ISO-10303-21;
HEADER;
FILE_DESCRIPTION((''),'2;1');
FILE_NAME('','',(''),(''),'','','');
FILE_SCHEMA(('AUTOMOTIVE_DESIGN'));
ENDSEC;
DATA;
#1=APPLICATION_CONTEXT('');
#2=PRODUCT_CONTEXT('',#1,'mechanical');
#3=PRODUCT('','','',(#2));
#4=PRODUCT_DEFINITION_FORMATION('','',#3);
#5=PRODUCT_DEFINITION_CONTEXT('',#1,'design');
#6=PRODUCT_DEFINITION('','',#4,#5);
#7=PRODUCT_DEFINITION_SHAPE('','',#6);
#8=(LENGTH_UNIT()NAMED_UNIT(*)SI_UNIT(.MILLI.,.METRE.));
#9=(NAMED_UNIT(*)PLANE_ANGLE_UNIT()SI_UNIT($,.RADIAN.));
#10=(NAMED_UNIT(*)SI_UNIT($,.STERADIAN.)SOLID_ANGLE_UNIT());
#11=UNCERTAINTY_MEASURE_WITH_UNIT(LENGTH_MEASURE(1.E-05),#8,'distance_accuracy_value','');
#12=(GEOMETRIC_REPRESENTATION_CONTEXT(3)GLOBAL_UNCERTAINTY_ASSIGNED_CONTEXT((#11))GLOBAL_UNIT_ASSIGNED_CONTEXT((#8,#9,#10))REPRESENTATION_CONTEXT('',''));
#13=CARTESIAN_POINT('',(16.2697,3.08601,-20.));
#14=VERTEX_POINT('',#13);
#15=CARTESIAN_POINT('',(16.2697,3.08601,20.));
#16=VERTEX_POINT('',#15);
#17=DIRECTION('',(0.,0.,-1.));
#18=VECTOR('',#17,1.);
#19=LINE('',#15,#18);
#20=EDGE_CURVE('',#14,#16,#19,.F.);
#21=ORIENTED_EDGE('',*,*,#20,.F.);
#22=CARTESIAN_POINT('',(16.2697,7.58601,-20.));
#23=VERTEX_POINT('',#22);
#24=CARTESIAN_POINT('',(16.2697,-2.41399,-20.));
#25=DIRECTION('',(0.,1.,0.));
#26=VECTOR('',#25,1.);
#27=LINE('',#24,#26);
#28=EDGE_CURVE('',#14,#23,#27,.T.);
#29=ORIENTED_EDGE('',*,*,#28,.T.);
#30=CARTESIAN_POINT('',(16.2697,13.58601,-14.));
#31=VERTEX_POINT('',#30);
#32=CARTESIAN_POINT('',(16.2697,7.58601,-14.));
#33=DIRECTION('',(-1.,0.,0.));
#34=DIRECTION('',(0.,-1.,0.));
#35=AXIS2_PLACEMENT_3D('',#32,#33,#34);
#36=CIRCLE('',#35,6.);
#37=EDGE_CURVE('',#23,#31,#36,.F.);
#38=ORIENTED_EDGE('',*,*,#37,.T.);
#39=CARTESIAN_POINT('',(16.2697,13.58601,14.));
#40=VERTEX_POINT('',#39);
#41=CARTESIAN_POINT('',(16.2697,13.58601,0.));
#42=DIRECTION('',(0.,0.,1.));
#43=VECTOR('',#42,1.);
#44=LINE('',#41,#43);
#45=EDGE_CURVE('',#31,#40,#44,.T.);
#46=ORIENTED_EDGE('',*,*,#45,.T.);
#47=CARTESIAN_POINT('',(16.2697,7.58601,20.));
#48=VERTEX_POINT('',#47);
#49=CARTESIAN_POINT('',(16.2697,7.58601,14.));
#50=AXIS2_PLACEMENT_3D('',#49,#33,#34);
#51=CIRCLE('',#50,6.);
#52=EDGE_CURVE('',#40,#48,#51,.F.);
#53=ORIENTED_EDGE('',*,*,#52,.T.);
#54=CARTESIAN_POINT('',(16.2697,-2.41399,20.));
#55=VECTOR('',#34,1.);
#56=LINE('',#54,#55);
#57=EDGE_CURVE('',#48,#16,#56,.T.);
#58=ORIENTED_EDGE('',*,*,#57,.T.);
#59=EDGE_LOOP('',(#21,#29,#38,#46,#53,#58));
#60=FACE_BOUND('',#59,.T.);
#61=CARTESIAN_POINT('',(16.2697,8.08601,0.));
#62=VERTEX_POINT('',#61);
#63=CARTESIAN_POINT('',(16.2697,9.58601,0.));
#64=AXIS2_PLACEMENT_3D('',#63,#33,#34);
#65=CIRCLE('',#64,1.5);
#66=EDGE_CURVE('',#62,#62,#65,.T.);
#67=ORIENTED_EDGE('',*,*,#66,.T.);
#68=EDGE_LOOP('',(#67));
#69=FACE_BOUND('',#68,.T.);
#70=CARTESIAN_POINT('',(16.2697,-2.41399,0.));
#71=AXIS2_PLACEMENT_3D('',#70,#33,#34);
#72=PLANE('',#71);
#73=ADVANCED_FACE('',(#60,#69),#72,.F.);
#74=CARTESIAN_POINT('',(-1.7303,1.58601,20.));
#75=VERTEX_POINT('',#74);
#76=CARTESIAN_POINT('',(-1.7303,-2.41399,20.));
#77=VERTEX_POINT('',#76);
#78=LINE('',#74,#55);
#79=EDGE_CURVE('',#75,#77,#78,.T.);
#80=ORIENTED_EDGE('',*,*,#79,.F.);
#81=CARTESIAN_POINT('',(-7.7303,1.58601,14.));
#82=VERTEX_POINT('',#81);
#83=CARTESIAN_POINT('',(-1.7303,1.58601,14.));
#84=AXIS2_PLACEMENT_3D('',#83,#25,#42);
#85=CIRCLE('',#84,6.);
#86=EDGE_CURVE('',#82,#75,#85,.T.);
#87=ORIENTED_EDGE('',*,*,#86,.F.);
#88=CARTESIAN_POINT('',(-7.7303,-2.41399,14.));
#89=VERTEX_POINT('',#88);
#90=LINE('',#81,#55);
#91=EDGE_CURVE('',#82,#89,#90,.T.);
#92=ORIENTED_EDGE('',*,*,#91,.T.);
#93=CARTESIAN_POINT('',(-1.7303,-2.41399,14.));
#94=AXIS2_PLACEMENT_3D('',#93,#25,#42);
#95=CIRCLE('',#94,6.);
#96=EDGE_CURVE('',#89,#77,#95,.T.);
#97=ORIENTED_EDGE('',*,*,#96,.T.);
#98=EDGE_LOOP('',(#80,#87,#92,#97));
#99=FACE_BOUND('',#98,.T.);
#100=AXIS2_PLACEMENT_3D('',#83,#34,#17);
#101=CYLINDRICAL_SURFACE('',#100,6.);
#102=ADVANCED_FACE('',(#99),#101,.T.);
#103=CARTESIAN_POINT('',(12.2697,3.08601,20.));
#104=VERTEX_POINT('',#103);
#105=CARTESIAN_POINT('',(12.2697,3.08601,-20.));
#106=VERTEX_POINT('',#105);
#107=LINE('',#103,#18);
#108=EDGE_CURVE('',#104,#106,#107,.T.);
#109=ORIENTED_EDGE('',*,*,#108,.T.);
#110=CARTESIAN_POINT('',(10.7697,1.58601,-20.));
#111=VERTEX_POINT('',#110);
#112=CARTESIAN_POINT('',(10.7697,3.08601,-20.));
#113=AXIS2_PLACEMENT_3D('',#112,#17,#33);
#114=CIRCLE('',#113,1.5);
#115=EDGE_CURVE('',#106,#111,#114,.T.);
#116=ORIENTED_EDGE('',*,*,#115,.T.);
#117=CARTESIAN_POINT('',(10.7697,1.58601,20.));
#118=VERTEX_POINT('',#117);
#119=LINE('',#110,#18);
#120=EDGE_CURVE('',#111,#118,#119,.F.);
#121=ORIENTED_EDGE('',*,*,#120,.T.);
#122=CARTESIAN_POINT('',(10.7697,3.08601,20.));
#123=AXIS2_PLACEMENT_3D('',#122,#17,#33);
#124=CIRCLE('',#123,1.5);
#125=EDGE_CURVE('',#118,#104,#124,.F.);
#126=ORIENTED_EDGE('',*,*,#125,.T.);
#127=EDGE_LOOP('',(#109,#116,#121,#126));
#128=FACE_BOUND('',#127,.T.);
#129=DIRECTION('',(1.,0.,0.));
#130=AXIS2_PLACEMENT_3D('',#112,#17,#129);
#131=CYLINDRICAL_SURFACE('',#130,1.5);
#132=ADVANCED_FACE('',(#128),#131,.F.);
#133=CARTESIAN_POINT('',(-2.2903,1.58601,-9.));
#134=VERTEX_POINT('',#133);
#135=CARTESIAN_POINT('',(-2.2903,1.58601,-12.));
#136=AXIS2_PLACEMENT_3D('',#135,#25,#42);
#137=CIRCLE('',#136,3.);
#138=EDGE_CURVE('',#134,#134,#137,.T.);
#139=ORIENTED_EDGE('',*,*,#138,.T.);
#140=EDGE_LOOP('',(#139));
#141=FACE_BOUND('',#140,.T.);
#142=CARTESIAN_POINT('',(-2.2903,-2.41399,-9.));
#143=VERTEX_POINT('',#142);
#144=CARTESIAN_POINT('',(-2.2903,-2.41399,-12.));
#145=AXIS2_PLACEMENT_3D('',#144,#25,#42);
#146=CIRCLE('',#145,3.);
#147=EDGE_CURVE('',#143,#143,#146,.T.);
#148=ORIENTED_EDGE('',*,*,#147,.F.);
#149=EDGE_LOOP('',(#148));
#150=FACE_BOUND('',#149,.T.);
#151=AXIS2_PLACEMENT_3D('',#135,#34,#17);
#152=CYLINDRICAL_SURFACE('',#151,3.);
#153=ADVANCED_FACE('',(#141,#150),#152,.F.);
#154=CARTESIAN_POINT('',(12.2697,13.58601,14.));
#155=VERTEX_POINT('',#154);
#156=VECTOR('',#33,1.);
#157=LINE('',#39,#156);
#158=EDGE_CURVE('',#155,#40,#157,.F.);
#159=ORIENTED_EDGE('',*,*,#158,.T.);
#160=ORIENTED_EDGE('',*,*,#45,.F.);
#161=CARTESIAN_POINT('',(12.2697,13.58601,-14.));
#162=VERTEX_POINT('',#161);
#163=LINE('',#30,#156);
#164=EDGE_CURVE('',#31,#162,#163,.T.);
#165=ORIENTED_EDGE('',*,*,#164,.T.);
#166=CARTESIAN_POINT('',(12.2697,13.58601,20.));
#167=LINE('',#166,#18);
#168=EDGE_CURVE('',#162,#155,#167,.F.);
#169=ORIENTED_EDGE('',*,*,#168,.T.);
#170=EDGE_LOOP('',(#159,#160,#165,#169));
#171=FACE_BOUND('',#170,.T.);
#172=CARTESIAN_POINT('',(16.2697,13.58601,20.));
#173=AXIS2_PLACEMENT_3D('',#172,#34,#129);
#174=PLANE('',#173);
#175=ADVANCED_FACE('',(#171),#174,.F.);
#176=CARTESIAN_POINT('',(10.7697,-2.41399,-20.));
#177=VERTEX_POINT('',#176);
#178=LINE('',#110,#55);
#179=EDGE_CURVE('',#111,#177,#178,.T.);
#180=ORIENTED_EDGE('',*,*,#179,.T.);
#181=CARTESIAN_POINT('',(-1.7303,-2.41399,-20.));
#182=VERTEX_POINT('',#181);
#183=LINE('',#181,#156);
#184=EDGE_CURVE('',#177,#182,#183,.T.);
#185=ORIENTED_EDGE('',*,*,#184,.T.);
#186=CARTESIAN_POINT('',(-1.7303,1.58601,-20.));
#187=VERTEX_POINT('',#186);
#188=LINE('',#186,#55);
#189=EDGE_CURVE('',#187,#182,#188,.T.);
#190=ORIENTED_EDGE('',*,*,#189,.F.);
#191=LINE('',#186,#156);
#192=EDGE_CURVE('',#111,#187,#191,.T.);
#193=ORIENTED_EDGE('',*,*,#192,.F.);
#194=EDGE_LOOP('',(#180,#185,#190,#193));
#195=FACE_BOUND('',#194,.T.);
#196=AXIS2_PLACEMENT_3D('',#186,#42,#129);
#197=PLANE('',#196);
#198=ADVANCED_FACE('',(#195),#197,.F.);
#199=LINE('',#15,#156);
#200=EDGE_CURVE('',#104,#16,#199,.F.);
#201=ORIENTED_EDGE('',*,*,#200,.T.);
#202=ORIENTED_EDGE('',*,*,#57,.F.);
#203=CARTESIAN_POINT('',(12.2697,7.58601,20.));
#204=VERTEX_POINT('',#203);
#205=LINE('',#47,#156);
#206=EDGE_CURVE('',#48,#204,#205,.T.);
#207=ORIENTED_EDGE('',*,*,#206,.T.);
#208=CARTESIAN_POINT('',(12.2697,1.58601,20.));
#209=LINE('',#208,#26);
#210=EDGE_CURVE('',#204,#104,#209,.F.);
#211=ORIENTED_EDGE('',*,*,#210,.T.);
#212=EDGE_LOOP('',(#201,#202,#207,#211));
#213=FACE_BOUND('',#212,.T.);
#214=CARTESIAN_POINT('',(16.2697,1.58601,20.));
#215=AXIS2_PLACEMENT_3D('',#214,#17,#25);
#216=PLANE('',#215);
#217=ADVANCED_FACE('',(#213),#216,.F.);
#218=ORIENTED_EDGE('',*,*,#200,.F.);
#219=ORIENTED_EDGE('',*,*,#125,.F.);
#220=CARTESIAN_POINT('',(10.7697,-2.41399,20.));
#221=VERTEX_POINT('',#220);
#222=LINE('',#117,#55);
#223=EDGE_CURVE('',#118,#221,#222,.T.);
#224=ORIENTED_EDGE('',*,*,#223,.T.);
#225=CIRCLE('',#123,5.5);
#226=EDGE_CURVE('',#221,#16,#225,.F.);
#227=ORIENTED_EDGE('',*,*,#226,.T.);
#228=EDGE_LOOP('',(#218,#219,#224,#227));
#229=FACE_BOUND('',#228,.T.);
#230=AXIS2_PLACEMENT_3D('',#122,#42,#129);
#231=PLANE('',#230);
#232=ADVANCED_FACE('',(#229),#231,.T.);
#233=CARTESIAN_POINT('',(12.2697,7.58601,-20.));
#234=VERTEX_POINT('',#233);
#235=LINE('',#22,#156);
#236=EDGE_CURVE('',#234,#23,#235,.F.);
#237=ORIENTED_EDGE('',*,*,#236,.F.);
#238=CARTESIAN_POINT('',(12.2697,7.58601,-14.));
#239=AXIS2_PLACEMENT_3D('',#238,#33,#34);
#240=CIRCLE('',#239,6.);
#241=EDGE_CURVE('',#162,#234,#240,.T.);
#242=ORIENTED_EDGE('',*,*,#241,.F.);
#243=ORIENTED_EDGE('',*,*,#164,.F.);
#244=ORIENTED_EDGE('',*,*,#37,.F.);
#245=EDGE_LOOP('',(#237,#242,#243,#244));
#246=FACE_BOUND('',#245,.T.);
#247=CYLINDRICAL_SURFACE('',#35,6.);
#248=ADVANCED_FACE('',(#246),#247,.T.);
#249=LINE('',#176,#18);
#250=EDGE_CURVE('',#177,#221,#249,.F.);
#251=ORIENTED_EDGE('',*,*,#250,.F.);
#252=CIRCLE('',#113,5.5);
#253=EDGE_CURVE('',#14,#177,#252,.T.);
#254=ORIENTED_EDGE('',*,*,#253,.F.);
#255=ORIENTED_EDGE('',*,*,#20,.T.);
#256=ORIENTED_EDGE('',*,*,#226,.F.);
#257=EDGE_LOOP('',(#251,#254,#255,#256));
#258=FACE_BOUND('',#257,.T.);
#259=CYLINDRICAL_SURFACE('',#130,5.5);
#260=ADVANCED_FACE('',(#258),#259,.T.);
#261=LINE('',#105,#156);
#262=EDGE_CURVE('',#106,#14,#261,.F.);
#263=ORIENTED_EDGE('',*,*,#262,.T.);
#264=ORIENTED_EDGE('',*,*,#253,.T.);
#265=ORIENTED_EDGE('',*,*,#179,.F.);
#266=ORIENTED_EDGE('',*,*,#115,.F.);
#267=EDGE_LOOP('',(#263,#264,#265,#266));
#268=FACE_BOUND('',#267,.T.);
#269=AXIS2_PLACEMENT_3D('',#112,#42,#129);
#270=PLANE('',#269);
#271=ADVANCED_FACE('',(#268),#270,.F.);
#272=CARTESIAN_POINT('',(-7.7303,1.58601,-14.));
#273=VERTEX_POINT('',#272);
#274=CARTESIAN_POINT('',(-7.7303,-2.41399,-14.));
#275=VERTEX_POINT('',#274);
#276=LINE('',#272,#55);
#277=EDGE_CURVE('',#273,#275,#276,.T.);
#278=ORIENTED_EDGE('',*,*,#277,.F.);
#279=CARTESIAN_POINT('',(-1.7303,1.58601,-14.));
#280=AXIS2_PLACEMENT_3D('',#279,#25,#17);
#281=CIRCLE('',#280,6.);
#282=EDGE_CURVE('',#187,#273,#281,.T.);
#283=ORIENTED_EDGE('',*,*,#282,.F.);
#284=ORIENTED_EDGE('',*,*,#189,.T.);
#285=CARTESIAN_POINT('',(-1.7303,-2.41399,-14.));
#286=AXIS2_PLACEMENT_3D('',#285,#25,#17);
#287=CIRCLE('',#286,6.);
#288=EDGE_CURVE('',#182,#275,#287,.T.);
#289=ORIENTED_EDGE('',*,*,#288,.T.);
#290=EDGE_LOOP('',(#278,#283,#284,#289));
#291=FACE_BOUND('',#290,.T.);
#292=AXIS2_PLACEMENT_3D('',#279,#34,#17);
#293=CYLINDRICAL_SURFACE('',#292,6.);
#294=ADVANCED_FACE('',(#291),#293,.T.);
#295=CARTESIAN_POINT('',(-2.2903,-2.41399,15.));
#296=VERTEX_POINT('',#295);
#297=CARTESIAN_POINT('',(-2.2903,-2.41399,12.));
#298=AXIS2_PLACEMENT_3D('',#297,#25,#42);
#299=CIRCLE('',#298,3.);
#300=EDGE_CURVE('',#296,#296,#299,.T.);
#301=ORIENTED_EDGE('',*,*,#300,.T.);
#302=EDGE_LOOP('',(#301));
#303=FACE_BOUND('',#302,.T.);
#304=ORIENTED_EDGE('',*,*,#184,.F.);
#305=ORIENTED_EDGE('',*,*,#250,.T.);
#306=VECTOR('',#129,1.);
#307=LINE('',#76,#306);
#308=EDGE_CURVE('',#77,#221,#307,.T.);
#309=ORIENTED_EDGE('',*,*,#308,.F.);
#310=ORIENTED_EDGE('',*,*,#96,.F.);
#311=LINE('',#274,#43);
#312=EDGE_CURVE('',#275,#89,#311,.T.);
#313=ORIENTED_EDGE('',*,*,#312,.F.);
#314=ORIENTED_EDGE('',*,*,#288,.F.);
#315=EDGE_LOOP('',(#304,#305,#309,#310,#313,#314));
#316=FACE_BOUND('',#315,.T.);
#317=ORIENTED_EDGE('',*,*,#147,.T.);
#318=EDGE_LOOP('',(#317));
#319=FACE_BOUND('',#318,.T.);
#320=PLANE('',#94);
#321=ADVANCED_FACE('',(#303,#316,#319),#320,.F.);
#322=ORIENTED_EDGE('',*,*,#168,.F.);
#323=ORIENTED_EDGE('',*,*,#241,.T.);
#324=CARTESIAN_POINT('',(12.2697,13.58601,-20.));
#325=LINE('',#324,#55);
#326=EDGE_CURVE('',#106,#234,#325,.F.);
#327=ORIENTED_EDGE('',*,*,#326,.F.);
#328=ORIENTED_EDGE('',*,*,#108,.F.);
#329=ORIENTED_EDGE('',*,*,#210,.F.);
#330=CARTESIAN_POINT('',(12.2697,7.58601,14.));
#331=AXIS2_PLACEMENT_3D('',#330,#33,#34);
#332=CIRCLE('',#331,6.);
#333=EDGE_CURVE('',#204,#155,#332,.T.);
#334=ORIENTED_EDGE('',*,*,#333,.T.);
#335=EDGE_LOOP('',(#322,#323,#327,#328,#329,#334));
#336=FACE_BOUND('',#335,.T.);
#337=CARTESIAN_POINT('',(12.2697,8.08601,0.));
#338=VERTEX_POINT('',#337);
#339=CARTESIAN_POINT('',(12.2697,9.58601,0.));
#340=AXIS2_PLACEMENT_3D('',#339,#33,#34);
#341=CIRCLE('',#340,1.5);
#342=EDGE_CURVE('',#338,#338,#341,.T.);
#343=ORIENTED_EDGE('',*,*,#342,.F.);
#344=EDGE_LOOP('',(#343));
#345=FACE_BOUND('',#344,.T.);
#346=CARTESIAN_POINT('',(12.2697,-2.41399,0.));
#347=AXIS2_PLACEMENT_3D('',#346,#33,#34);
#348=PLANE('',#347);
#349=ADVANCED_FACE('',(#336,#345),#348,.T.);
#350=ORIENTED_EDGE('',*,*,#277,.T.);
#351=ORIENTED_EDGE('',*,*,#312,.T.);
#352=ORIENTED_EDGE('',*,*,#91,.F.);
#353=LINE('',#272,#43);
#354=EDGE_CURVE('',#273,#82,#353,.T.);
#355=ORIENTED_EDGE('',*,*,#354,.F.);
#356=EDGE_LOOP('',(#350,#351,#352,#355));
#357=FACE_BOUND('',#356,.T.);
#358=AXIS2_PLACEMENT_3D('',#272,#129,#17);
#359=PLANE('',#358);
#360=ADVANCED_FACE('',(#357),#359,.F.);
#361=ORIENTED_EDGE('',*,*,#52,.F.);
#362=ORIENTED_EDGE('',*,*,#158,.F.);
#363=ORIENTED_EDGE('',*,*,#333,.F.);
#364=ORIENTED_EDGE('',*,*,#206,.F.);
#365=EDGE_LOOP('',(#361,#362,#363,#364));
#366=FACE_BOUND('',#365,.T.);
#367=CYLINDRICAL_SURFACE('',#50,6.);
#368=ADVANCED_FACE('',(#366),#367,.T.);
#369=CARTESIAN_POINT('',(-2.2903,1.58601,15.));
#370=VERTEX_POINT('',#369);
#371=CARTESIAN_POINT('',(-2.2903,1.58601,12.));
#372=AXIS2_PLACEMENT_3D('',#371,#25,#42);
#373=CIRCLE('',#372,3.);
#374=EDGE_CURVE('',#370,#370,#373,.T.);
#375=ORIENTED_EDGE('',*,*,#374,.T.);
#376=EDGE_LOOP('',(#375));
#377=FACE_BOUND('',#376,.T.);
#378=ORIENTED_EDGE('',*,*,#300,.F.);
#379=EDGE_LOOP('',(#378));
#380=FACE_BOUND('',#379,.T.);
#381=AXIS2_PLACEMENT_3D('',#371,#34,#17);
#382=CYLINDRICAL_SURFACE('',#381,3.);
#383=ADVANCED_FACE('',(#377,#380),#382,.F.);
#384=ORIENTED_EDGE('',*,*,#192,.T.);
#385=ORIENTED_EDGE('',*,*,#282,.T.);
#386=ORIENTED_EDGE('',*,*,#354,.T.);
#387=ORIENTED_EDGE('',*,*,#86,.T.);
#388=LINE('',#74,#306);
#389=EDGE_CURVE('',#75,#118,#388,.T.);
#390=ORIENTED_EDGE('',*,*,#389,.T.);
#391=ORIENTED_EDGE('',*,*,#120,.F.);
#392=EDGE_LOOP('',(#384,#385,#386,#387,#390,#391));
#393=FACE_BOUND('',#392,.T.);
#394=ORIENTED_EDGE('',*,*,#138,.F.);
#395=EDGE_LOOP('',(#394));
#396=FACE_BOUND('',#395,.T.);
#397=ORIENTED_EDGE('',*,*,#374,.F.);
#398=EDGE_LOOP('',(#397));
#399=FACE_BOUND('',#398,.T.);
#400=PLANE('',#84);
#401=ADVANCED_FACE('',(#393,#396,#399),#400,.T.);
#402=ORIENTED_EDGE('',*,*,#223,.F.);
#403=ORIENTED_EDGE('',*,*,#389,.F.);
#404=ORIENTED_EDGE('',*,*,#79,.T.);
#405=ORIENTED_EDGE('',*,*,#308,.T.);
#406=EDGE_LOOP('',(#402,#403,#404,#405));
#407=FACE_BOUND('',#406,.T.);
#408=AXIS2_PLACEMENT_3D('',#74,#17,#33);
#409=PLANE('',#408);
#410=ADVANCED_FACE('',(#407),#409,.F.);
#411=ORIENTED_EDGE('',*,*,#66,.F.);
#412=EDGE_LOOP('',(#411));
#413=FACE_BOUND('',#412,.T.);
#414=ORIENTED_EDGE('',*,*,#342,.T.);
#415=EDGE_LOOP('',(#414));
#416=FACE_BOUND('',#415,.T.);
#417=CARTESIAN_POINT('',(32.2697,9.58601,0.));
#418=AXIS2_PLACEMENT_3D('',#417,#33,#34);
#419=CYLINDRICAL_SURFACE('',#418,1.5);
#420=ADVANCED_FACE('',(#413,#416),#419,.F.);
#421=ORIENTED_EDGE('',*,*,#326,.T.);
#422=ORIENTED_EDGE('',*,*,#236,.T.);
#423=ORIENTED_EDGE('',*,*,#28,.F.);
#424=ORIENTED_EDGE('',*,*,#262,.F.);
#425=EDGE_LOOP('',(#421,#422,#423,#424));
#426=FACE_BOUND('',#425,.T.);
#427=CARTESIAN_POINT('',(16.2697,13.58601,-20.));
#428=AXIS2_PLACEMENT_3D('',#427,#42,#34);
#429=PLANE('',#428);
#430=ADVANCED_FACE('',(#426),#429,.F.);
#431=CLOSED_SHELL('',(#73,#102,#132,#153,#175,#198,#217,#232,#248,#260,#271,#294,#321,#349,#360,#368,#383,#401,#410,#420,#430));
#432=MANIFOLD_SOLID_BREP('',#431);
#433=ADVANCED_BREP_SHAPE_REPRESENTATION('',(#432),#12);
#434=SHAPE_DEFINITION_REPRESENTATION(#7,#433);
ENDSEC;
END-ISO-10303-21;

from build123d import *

# Parameters (mm, degrees)
SKETCH1_R                    = 1.5
BASE_FLANGE1_DEPTH           = 2
EDGE_FLANGE1_STRIP_W         = 9.5
EDGE_FLANGE1_STRIP_H         = 2
EDGE_FLANGE1_STRIP_CUT_DEPTH = 20
EDGE_FLANGE1_DEPTH           = 20
SKETCH9_R                    = 0.75
CUT_EXTRUDE1_DEPTH           = 10
FILLET1_R                    = 3
L_EK1_SCALE                  = 2


# Sheet-metal steps are written as plain solids
with BuildPart() as part:
    # Sketch1 → Base-Flange1 (new body)
    with BuildSketch(Plane(origin=(0, 0, 0), x_dir=(1, 0, 0), z_dir=(0, 1, 0))):
        with BuildLine():
            Line((0, 7), (0, -7))
            ThreePointArc((0, -7), (0.878679656, -9.121320344), (3, -10))
            Line((3, -10), (12, -10))
            Line((12, -10), (12, 10))
            Line((12, 10), (3, 10))
            ThreePointArc((3, 10), (0.878679656, 9.121320344), (0, 7))
        make_face()
        with Locations(Location((2.72, 6, 0), (0, 0, 270))):
            Circle(SKETCH1_R, mode=Mode.SUBTRACT)
        with Locations(Location((2.72, -6, 0), (0, 0, 270))):
            Circle(SKETCH1_R, mode=Mode.SUBTRACT)
    extrude(amount=BASE_FLANGE1_DEPTH)

    # Edge-Flange1 strip (across the edge) → Edge-Flange1 strip cut (cut)
    with BuildSketch(Plane(origin=(12, 2, 10), x_dir=(-1, 0, 0), z_dir=(0, 0, -1))):
        with Locations((-2, -1)):
            Rectangle(EDGE_FLANGE1_STRIP_W, EDGE_FLANGE1_STRIP_H)
    extrude(amount=EDGE_FLANGE1_STRIP_CUT_DEPTH, mode=Mode.SUBTRACT)

    # Edge-Flange1 section (across the edge) → Edge-Flange1 (add)
    with BuildSketch(Plane(origin=(12, 2, 10), x_dir=(-1, 0, 0), z_dir=(0, 0, -1))):
        with BuildLine():
            Line((0, 0.75), (0, 6))
            Line((0, 6), (2, 6))
            Line((2, 6), (2, 0.75))
            ThreePointArc((2, 0.75), (2.219669914, 0.219669914), (2.75, 0))
            Line((2.75, 0), (2.75, -2))
            ThreePointArc((2.75, -2), (0.805456352, -1.194543648), (0, 0.75))
        make_face()
    extrude(amount=EDGE_FLANGE1_DEPTH)

    # Sketch9 → Cut-Extrude1 (cut)
    with BuildSketch(Plane.ZY.offset(-10)):
        with Locations(Location((0, 6, 0), (0, 0, 270))):
            Circle(SKETCH9_R)
    extrude(amount=-CUT_EXTRUDE1_DEPTH, mode=Mode.SUBTRACT)

    # Fillet1
    fillet1_edges = [part.edges().sort_by_distance(p)[0] for p in [
        (11, 8, 10),
        (11, 8, -10),
    ]]
    fillet(fillet1_edges, radius=FILLET1_R)


with BuildPart() as part_1:
    # Ölçek1: scaled about (7.730300008, 2.413989503, 0)
    add(part.part.scale(L_EK1_SCALE).moved(Location((-7.730300008, -2.413989503, 0))))


solid = part_1.part
